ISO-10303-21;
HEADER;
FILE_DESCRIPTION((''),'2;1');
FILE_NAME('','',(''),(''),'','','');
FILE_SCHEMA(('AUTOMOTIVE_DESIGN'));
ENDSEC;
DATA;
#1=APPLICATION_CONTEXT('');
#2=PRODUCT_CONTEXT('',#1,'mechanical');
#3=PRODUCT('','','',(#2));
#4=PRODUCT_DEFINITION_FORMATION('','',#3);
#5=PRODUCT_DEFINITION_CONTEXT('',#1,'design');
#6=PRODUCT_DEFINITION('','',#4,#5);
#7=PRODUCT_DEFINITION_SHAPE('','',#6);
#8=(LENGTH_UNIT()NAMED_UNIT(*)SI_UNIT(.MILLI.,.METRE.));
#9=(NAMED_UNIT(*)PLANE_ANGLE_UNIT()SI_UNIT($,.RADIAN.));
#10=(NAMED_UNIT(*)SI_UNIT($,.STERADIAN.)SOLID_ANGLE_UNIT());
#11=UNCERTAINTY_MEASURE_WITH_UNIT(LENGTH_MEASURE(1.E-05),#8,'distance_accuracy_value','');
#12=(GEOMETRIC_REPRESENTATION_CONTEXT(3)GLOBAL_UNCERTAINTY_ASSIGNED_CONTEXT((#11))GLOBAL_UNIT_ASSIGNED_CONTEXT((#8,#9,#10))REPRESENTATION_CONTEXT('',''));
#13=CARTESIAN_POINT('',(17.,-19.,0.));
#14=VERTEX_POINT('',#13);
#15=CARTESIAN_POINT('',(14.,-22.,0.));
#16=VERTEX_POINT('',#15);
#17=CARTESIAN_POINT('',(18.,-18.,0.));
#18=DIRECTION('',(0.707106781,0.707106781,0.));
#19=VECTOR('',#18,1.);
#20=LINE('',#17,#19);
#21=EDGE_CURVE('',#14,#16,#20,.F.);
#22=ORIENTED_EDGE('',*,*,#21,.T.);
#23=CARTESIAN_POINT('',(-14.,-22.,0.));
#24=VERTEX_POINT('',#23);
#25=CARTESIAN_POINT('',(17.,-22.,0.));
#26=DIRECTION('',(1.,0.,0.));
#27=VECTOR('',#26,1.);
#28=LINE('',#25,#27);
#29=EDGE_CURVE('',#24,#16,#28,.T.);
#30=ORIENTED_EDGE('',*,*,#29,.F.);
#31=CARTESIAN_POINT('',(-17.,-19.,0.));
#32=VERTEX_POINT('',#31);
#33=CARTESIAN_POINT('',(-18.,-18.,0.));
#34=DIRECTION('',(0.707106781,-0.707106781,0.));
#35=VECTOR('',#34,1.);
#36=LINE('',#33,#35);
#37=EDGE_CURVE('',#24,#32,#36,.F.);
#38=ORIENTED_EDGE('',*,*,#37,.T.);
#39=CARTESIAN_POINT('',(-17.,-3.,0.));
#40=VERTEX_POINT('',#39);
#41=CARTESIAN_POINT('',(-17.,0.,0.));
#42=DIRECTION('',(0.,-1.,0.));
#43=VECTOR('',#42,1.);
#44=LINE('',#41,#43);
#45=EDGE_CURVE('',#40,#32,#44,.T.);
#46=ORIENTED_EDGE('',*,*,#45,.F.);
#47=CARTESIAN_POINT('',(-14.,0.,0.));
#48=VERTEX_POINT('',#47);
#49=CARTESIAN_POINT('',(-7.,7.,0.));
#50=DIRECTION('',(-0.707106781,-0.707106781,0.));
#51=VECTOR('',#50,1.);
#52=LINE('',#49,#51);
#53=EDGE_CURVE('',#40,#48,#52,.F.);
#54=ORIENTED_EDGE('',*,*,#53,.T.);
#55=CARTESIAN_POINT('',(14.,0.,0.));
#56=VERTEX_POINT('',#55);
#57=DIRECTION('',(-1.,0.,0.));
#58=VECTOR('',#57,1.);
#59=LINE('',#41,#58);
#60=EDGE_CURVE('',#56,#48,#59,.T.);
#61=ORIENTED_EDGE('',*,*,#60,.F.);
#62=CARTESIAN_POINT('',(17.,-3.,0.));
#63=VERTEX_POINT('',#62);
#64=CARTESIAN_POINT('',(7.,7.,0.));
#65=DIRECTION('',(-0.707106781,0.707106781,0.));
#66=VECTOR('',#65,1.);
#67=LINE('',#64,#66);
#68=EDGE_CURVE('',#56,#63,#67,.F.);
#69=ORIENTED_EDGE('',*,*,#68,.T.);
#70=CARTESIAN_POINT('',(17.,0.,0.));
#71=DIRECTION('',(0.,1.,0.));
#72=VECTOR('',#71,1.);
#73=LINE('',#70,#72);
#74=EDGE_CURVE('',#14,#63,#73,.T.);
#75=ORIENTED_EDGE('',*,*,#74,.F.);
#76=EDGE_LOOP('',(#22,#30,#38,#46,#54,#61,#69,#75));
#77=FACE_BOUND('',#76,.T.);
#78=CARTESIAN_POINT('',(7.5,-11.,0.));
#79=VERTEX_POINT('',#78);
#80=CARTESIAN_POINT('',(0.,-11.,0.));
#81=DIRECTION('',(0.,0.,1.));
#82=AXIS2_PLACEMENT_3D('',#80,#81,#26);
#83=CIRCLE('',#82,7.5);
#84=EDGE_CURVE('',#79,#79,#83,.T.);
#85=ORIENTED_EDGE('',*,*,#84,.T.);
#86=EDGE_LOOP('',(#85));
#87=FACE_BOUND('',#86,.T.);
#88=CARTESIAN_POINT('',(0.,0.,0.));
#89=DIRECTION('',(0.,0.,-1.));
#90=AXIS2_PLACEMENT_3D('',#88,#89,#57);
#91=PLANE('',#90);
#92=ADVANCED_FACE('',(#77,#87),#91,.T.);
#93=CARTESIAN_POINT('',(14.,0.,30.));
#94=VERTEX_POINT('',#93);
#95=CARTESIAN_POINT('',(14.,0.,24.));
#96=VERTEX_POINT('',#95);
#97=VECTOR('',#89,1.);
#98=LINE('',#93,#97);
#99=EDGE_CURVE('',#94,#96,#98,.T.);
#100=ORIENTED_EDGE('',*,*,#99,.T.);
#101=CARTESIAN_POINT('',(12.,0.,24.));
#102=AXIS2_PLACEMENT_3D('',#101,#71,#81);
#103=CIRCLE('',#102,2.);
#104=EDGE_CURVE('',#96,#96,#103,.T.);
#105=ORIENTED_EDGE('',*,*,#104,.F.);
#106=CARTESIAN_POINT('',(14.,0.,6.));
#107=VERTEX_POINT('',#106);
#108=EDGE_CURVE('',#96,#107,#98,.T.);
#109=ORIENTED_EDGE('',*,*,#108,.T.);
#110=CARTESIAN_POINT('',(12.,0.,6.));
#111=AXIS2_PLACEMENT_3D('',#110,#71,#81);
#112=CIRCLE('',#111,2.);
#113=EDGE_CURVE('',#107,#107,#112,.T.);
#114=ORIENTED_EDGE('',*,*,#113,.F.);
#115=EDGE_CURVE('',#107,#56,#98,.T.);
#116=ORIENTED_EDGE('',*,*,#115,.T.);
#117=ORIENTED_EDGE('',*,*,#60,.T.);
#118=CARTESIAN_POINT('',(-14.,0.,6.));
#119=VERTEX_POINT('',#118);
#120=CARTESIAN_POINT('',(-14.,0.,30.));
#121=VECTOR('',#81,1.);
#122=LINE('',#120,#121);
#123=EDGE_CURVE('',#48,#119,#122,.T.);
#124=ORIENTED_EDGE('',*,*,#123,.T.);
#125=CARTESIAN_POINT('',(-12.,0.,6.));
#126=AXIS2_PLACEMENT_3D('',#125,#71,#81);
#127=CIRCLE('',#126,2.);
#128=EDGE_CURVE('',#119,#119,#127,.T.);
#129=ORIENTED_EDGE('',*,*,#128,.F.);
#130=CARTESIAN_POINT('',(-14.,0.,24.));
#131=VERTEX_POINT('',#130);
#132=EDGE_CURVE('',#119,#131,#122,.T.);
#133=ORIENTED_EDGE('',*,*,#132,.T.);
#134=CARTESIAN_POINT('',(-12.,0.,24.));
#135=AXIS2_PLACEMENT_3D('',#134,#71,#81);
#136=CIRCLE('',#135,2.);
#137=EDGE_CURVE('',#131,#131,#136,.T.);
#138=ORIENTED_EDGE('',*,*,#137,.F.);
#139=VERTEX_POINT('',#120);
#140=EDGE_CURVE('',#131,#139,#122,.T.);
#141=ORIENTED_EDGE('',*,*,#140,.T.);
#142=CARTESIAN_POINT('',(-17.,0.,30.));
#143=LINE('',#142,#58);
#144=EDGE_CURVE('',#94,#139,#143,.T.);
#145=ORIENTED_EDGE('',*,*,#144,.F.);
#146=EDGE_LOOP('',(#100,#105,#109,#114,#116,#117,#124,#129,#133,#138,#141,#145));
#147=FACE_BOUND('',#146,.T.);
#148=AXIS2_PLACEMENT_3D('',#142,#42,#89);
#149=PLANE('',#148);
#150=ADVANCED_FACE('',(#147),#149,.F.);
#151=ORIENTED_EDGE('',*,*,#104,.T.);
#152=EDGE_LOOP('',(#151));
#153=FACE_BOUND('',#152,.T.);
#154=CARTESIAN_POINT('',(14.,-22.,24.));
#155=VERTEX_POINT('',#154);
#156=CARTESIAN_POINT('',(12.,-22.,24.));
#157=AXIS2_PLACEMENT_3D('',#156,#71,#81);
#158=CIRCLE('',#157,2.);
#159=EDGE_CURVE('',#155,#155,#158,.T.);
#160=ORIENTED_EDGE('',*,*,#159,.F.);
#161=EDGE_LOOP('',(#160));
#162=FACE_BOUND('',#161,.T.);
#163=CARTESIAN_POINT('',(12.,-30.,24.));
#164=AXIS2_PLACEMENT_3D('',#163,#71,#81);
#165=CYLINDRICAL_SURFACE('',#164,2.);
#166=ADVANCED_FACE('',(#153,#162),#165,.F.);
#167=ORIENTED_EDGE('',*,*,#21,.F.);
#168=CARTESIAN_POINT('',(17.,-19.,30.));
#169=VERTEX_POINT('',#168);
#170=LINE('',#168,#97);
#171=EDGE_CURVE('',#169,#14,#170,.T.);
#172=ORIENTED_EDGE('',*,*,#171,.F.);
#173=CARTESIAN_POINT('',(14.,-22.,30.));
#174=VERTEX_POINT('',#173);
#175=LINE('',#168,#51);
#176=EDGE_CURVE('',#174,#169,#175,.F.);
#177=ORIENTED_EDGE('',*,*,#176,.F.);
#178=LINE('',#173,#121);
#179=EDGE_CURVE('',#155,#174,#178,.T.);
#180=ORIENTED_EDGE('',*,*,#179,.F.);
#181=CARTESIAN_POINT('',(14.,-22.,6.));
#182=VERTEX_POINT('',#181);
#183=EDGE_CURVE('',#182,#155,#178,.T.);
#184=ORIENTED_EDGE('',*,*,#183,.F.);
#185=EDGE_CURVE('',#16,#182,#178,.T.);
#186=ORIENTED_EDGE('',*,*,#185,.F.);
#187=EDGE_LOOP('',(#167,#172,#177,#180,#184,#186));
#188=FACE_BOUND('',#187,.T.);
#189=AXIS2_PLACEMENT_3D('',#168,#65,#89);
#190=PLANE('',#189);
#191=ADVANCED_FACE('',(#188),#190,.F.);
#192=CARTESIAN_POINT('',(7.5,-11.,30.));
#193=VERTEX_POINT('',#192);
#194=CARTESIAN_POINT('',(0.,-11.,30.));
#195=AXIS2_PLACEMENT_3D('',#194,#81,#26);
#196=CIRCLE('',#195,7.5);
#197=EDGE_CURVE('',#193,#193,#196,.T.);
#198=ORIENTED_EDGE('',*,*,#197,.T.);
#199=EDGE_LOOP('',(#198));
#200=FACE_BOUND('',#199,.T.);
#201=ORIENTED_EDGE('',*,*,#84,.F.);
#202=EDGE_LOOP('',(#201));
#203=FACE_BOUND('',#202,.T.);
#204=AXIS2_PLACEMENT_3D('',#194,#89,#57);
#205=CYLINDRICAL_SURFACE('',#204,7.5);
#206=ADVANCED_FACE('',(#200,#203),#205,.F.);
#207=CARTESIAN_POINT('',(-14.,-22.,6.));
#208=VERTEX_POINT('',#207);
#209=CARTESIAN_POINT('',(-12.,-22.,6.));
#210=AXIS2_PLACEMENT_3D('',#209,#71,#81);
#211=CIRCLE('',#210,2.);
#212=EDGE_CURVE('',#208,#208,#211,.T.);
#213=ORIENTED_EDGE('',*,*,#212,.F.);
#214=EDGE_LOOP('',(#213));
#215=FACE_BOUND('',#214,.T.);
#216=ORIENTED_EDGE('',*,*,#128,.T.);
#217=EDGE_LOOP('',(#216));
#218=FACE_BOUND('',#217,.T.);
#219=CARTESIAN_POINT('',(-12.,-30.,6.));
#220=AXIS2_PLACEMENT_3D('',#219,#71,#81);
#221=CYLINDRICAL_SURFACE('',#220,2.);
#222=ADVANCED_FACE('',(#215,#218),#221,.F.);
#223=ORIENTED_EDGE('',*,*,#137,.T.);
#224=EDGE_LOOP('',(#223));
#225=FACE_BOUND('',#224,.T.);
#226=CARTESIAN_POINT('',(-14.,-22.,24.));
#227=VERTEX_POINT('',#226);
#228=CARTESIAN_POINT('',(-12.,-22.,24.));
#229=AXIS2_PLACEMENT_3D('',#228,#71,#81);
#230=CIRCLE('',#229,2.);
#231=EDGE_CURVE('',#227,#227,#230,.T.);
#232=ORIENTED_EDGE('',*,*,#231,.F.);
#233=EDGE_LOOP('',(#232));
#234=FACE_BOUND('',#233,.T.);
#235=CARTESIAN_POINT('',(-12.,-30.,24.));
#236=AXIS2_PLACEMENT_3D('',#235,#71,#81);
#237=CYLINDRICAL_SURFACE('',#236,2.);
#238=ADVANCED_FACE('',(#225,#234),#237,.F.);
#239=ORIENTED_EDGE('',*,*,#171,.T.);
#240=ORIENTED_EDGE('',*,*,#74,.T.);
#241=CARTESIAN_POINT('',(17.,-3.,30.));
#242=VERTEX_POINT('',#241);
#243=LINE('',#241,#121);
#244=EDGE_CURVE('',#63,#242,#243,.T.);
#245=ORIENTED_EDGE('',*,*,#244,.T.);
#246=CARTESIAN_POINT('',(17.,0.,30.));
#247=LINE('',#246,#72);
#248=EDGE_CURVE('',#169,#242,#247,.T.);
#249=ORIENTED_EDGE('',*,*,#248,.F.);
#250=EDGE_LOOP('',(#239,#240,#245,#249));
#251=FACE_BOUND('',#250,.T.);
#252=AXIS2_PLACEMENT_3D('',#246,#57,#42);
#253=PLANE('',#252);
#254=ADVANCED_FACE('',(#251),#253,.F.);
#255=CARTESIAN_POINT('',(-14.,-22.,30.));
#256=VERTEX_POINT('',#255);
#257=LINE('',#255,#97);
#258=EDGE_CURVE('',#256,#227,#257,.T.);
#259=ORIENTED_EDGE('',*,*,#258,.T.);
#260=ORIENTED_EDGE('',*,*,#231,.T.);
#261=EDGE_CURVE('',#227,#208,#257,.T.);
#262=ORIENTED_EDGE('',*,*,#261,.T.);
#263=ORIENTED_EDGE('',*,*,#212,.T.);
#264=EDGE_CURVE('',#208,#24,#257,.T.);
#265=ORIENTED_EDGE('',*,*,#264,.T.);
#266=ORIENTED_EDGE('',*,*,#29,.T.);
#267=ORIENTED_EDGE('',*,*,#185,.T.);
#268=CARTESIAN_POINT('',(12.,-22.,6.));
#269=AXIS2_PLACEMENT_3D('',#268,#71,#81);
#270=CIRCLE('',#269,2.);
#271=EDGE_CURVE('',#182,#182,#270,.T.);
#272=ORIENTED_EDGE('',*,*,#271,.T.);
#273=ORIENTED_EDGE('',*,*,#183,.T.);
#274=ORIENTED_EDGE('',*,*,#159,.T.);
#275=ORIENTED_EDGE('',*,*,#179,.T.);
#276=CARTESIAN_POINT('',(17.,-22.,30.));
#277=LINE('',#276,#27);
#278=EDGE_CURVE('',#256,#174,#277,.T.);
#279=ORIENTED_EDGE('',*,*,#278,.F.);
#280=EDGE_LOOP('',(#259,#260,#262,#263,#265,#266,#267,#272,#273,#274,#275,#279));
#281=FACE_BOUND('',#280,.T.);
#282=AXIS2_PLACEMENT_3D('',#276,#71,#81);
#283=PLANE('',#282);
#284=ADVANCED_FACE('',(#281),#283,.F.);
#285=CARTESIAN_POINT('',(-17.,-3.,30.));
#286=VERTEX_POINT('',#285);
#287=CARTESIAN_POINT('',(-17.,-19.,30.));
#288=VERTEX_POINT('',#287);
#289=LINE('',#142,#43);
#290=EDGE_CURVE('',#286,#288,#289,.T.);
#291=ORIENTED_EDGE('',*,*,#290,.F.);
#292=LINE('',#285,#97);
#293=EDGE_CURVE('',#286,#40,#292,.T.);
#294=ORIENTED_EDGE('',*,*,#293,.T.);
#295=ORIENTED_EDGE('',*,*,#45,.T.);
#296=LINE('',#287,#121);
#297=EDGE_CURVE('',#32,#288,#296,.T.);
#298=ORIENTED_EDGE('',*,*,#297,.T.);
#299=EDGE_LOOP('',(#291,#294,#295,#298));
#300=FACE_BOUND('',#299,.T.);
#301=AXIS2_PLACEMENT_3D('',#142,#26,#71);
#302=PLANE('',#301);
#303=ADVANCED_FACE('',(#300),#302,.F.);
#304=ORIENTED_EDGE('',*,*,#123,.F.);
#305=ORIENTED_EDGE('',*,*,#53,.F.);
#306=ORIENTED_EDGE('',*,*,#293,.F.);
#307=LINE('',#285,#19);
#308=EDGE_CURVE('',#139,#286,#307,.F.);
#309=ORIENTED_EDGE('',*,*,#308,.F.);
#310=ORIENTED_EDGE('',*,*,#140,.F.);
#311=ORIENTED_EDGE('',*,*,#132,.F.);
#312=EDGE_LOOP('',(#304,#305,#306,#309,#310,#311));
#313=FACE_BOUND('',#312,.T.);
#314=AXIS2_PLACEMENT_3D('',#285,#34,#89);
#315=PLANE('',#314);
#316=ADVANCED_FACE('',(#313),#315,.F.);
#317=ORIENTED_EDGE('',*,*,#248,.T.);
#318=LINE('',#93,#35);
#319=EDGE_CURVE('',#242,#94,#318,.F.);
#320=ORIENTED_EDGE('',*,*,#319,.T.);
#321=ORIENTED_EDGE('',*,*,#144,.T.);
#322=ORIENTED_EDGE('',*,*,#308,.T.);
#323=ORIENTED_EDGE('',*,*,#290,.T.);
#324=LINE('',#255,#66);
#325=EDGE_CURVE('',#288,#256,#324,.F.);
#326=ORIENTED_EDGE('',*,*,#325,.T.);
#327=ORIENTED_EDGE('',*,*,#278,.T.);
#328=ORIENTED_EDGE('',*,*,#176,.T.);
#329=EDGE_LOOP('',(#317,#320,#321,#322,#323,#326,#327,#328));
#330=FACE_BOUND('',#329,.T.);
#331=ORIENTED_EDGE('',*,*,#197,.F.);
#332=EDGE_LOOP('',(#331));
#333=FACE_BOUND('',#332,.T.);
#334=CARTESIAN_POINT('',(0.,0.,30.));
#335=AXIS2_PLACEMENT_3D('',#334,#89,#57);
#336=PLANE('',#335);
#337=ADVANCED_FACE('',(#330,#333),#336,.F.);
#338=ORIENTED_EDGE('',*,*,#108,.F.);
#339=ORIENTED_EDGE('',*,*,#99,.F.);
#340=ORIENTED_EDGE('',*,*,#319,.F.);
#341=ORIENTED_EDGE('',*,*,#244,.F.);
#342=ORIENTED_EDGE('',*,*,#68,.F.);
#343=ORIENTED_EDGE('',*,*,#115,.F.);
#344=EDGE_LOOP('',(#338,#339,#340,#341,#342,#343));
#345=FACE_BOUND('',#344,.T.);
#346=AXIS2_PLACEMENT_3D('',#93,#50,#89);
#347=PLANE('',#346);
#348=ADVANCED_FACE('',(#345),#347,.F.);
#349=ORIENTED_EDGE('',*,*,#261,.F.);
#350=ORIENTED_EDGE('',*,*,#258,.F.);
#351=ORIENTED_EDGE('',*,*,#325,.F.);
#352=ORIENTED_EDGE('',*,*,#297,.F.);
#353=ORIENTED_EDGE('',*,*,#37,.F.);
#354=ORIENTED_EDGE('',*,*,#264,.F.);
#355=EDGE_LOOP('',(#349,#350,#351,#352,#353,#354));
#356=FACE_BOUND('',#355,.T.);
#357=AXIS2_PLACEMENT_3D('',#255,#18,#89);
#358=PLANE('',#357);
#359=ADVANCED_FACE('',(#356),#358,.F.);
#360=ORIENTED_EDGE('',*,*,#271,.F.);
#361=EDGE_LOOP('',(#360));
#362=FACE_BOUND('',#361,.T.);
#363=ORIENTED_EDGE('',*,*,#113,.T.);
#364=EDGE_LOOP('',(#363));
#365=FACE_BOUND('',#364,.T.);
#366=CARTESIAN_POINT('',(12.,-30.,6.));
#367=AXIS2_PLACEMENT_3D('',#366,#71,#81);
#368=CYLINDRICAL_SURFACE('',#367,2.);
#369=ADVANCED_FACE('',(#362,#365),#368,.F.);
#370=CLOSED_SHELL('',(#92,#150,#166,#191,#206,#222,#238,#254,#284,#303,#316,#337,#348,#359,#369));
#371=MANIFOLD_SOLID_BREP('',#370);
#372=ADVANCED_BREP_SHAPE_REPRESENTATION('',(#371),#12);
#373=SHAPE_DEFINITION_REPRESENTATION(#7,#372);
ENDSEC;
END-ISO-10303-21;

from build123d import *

# Parameters (mm, degrees)
CROQUIS1_W              = 34
CROQUIS1_H              = 22
CROQUIS1_R              = 7.5
SALIENTE_EXTRUIR1_DEPTH = 30
CROQUIS2_R              = 2
CORTAR_EXTRUIR1_DEPTH   = 30
CHAFL_N1_SIZE           = 3


with BuildPart() as part:
    # Croquis1 → Saliente-Extruir1 (new body)
    with BuildSketch(Plane.XY):
        with Locations((0, -11)):
            Rectangle(CROQUIS1_W, CROQUIS1_H)
        with Locations((0, -11)):
            Circle(CROQUIS1_R, mode=Mode.SUBTRACT)
    extrude(amount=SALIENTE_EXTRUIR1_DEPTH)

    # Croquis2 → Cortar-Extruir1 (cut)
    with BuildSketch(Plane(origin=(0, 0, 0), x_dir=(1, 0, 0), z_dir=(0, 1, 0))):
        with Locations(Location((-12, -6, 0), (0, 0, 270))):
            Circle(CROQUIS2_R)
        with Locations(Location((12, -6, 0), (0, 0, 270))):
            Circle(CROQUIS2_R)
        with Locations(Location((-12, -24, 0), (0, 0, 270))):
            Circle(CROQUIS2_R)
        with Locations(Location((12, -24, 0), (0, 0, 270))):
            Circle(CROQUIS2_R)
    extrude(amount=-CORTAR_EXTRUIR1_DEPTH, mode=Mode.SUBTRACT)

    # Chaflán1
    chafl_n1_edges = [part.edges().sort_by_distance(p)[0] for p in [
        (17, -22, 15),
        (-17, -22, 15),
        (-17, 0, 15),
        (17, 0, 15),
    ]]
    chamfer(chafl_n1_edges, length=CHAFL_N1_SIZE - 0.0001)  # a hair under: the kernel refuses the full size


solid = part.part
